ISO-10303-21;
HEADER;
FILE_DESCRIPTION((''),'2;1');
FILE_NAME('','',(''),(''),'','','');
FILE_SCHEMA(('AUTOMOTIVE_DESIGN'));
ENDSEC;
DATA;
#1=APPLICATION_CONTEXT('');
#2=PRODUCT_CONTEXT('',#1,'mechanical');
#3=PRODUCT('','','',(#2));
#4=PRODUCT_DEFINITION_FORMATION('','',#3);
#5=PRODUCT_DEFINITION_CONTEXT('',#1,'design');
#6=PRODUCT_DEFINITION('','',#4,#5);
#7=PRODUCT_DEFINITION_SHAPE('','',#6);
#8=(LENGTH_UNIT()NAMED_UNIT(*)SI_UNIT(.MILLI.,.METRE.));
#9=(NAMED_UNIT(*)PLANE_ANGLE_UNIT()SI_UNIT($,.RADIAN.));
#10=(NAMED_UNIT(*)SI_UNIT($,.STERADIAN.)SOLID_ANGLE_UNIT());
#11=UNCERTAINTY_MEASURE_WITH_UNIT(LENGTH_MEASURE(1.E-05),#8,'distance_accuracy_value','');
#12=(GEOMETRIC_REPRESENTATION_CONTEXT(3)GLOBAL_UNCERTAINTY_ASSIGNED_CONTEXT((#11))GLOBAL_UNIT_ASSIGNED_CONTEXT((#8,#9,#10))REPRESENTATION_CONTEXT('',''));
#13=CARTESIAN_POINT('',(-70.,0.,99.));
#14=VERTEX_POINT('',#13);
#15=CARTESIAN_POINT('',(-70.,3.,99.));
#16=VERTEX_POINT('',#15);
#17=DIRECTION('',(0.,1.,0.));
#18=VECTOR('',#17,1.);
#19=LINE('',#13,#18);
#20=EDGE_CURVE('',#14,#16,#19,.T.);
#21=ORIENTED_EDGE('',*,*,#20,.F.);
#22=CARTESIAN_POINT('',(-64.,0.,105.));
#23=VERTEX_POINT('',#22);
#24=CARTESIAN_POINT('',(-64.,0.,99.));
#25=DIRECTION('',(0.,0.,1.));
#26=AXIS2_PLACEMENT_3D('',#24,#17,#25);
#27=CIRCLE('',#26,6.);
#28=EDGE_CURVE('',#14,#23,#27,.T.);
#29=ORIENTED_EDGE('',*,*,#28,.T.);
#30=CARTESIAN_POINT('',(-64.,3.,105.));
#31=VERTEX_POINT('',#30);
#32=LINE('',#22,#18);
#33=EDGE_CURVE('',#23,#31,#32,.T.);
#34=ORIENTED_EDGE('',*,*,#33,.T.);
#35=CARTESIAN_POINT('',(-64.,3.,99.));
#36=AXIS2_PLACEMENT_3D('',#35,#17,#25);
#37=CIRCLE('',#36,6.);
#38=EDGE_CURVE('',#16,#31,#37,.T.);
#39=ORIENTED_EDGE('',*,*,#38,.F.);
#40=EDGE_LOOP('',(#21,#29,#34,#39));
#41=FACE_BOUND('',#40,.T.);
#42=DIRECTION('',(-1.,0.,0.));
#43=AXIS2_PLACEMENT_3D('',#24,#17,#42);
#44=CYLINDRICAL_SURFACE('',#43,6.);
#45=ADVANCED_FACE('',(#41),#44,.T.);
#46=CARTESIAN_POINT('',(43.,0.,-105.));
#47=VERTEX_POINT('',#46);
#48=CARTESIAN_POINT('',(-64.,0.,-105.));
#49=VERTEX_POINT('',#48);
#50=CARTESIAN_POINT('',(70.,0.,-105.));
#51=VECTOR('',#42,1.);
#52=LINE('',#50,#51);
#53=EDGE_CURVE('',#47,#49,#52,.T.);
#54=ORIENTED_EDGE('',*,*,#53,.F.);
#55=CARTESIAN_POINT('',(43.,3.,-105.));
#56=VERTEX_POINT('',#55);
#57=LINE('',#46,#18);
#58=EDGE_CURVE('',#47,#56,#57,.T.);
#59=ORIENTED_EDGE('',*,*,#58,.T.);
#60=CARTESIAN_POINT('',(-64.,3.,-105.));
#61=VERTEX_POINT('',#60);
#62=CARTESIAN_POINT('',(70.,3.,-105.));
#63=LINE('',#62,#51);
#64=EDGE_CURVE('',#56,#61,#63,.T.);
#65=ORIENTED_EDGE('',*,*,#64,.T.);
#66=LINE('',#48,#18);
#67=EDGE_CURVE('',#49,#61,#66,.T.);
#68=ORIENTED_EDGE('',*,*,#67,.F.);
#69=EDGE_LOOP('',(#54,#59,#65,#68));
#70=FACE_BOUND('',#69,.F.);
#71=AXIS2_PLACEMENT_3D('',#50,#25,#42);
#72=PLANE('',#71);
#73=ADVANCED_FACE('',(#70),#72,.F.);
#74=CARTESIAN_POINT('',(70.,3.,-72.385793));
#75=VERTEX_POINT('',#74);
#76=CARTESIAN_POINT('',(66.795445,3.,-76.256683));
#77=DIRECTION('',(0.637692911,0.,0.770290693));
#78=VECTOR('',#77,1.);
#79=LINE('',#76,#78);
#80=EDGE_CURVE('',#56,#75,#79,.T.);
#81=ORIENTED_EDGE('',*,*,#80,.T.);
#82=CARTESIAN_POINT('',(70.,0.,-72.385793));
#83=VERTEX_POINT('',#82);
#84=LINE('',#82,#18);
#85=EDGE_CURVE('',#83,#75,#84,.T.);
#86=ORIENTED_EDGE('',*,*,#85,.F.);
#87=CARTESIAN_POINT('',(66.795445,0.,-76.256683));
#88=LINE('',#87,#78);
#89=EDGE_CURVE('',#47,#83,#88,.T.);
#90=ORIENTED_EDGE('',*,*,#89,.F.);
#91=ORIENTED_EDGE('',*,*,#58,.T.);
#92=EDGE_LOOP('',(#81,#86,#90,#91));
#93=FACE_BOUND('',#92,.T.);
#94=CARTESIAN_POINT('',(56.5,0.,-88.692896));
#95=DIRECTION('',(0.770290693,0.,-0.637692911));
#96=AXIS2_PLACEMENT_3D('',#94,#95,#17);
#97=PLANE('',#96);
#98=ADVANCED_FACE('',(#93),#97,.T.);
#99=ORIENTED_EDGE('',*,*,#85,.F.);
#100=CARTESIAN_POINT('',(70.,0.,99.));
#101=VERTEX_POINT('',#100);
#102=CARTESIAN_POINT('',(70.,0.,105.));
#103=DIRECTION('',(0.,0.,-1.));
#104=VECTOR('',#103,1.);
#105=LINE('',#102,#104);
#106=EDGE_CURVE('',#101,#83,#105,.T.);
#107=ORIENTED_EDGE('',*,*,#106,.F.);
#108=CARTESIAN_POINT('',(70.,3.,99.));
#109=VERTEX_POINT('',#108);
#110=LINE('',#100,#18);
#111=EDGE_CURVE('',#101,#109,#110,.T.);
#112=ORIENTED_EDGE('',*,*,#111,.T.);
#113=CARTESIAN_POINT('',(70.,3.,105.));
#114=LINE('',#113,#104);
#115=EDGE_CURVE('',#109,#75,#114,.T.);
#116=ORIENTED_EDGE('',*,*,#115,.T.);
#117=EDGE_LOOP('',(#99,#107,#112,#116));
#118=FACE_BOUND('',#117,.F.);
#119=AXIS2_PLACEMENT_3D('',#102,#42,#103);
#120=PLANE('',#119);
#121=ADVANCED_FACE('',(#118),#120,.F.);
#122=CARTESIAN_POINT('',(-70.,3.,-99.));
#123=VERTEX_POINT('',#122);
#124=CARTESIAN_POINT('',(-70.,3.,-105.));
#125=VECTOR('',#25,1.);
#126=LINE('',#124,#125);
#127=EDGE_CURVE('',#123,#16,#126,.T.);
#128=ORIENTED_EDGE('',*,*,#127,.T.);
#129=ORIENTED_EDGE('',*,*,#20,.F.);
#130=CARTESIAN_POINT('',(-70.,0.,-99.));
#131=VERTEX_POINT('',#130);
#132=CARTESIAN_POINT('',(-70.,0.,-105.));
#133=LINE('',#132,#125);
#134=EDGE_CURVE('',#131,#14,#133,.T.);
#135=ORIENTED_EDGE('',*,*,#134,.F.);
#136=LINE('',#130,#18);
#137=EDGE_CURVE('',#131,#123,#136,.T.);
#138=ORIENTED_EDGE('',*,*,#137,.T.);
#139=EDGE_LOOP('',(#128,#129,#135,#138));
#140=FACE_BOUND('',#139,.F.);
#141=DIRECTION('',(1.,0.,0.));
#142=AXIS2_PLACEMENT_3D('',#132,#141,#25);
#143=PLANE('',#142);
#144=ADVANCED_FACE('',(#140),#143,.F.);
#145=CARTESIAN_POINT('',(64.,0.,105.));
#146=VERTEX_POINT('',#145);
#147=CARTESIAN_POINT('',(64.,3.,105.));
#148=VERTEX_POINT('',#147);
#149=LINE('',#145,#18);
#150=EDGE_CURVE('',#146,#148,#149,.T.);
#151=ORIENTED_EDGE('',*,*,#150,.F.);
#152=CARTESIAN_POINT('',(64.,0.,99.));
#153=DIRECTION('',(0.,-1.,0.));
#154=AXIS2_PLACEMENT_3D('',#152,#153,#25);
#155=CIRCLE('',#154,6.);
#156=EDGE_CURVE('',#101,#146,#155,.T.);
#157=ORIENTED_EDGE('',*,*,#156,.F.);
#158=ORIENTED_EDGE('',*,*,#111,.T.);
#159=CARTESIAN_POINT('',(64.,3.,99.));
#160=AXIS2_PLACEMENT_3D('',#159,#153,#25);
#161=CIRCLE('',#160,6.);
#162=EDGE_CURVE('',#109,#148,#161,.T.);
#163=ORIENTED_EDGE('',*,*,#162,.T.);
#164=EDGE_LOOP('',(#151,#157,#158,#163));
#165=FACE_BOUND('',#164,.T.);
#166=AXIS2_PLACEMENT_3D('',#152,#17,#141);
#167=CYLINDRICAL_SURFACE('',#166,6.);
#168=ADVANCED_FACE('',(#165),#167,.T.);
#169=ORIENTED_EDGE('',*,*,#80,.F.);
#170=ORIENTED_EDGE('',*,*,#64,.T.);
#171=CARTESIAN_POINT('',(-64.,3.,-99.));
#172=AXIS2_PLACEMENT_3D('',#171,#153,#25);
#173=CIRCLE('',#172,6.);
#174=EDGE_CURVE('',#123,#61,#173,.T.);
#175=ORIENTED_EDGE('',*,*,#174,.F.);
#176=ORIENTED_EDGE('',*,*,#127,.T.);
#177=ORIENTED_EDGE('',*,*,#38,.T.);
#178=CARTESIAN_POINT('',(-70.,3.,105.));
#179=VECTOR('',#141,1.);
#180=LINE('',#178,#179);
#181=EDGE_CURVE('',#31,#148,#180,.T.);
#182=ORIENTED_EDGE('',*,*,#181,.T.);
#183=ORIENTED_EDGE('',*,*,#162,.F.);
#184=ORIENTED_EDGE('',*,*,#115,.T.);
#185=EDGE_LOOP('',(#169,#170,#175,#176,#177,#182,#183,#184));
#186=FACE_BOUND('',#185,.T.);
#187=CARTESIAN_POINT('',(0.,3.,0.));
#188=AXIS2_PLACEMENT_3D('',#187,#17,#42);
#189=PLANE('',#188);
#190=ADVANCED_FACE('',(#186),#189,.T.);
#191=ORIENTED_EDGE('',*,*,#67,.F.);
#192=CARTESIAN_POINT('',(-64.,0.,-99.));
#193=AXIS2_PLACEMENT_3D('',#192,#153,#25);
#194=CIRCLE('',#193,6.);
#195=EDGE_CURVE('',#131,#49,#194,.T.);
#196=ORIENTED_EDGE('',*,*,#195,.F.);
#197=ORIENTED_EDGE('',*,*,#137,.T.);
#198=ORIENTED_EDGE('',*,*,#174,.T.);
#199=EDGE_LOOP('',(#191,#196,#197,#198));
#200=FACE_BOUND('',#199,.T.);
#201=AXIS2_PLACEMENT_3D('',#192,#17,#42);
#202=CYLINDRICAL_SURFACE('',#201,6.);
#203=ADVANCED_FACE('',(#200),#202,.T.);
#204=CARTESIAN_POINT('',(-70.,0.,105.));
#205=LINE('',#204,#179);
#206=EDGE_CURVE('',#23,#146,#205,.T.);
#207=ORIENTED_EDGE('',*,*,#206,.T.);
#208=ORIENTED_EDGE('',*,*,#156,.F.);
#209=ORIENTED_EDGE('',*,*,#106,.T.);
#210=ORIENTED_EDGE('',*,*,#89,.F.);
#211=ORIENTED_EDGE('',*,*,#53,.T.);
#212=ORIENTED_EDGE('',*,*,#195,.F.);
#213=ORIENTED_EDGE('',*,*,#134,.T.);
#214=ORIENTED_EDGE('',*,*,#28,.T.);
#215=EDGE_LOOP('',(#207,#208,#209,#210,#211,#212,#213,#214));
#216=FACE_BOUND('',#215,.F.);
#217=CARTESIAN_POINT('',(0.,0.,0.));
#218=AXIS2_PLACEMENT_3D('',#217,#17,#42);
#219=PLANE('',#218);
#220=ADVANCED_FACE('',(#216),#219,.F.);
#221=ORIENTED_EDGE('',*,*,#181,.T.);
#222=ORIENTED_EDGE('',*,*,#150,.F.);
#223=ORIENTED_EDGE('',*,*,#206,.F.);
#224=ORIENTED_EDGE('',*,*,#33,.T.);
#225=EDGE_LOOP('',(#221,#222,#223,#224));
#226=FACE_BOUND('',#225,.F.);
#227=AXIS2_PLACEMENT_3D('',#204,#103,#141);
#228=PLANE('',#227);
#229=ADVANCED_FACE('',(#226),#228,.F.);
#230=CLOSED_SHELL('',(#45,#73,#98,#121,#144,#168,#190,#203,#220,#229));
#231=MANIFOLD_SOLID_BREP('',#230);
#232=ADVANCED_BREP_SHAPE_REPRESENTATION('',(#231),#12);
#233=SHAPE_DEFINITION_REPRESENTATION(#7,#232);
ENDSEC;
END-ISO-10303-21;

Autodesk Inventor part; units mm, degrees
ref_plane "YZ Plane" through (0, 0, 0) normal (1, 0, 0) x (0, 1, 0)
ref_plane "XZ Plane" through (0, 0, 0) normal (0, 1, 0) x (-1, 0, 0)
ref_plane "XY Plane" through (0, 0, 0) normal (0, 0, 1) x (1, 0, 0)
sketch "Sketch1" plane through (0, 0, 0) normal (0, 1, 0) x (-1, 0, 0)
  line L0 (70, 105) -> (-70, 105)
  line L1 (-70, 105) -> (-70, -105)
  line L2 (-70, -105) -> (70, -105)
  line L3 (70, -105) -> (70, 105)
  line L4 (70, 105) -> (-70, -105) construction
  point P0 (0, 0)
  point P1 (0, 0)
  dimension "d0" = 140
  dimension "d1" = 210
extrude "Plate1" add sketch "Sketch1" along normal blind 3
fillet "Corner Round1" radius 6 3 edges at (70, 1.5, 105) (-70, 1.5, 105) (-70, 1.5, -105)
chamfer "Corner Chamfer1" distance 27 angle 50.38 1 edges at (70, 1.5, -105) measured on face at (25.3333, 1, -105)
equation "\"d2\" = Thickness"
equation "\"BendReliefWidth\" = Thickness"
equation "\"BendReliefDepth\" = 0.5 * Thickness"
equation "\"CornerReliefSize\" = 4 * Thickness"
equation "\"MinimumRemnant\" = 2 * Thickness"
equation "\"TransitionRadius\" = BendRadius"
equation "\"JacobiRadiusSize\" = BendRadius"
equation "\"GapSize\" = Thickness"
equation "\"Thickness\" = 3"
equation "\"BendRadius\" = 5"
properties part number "MSC 909 TUBE SUPPORT 3" material "Stainless Steel"
